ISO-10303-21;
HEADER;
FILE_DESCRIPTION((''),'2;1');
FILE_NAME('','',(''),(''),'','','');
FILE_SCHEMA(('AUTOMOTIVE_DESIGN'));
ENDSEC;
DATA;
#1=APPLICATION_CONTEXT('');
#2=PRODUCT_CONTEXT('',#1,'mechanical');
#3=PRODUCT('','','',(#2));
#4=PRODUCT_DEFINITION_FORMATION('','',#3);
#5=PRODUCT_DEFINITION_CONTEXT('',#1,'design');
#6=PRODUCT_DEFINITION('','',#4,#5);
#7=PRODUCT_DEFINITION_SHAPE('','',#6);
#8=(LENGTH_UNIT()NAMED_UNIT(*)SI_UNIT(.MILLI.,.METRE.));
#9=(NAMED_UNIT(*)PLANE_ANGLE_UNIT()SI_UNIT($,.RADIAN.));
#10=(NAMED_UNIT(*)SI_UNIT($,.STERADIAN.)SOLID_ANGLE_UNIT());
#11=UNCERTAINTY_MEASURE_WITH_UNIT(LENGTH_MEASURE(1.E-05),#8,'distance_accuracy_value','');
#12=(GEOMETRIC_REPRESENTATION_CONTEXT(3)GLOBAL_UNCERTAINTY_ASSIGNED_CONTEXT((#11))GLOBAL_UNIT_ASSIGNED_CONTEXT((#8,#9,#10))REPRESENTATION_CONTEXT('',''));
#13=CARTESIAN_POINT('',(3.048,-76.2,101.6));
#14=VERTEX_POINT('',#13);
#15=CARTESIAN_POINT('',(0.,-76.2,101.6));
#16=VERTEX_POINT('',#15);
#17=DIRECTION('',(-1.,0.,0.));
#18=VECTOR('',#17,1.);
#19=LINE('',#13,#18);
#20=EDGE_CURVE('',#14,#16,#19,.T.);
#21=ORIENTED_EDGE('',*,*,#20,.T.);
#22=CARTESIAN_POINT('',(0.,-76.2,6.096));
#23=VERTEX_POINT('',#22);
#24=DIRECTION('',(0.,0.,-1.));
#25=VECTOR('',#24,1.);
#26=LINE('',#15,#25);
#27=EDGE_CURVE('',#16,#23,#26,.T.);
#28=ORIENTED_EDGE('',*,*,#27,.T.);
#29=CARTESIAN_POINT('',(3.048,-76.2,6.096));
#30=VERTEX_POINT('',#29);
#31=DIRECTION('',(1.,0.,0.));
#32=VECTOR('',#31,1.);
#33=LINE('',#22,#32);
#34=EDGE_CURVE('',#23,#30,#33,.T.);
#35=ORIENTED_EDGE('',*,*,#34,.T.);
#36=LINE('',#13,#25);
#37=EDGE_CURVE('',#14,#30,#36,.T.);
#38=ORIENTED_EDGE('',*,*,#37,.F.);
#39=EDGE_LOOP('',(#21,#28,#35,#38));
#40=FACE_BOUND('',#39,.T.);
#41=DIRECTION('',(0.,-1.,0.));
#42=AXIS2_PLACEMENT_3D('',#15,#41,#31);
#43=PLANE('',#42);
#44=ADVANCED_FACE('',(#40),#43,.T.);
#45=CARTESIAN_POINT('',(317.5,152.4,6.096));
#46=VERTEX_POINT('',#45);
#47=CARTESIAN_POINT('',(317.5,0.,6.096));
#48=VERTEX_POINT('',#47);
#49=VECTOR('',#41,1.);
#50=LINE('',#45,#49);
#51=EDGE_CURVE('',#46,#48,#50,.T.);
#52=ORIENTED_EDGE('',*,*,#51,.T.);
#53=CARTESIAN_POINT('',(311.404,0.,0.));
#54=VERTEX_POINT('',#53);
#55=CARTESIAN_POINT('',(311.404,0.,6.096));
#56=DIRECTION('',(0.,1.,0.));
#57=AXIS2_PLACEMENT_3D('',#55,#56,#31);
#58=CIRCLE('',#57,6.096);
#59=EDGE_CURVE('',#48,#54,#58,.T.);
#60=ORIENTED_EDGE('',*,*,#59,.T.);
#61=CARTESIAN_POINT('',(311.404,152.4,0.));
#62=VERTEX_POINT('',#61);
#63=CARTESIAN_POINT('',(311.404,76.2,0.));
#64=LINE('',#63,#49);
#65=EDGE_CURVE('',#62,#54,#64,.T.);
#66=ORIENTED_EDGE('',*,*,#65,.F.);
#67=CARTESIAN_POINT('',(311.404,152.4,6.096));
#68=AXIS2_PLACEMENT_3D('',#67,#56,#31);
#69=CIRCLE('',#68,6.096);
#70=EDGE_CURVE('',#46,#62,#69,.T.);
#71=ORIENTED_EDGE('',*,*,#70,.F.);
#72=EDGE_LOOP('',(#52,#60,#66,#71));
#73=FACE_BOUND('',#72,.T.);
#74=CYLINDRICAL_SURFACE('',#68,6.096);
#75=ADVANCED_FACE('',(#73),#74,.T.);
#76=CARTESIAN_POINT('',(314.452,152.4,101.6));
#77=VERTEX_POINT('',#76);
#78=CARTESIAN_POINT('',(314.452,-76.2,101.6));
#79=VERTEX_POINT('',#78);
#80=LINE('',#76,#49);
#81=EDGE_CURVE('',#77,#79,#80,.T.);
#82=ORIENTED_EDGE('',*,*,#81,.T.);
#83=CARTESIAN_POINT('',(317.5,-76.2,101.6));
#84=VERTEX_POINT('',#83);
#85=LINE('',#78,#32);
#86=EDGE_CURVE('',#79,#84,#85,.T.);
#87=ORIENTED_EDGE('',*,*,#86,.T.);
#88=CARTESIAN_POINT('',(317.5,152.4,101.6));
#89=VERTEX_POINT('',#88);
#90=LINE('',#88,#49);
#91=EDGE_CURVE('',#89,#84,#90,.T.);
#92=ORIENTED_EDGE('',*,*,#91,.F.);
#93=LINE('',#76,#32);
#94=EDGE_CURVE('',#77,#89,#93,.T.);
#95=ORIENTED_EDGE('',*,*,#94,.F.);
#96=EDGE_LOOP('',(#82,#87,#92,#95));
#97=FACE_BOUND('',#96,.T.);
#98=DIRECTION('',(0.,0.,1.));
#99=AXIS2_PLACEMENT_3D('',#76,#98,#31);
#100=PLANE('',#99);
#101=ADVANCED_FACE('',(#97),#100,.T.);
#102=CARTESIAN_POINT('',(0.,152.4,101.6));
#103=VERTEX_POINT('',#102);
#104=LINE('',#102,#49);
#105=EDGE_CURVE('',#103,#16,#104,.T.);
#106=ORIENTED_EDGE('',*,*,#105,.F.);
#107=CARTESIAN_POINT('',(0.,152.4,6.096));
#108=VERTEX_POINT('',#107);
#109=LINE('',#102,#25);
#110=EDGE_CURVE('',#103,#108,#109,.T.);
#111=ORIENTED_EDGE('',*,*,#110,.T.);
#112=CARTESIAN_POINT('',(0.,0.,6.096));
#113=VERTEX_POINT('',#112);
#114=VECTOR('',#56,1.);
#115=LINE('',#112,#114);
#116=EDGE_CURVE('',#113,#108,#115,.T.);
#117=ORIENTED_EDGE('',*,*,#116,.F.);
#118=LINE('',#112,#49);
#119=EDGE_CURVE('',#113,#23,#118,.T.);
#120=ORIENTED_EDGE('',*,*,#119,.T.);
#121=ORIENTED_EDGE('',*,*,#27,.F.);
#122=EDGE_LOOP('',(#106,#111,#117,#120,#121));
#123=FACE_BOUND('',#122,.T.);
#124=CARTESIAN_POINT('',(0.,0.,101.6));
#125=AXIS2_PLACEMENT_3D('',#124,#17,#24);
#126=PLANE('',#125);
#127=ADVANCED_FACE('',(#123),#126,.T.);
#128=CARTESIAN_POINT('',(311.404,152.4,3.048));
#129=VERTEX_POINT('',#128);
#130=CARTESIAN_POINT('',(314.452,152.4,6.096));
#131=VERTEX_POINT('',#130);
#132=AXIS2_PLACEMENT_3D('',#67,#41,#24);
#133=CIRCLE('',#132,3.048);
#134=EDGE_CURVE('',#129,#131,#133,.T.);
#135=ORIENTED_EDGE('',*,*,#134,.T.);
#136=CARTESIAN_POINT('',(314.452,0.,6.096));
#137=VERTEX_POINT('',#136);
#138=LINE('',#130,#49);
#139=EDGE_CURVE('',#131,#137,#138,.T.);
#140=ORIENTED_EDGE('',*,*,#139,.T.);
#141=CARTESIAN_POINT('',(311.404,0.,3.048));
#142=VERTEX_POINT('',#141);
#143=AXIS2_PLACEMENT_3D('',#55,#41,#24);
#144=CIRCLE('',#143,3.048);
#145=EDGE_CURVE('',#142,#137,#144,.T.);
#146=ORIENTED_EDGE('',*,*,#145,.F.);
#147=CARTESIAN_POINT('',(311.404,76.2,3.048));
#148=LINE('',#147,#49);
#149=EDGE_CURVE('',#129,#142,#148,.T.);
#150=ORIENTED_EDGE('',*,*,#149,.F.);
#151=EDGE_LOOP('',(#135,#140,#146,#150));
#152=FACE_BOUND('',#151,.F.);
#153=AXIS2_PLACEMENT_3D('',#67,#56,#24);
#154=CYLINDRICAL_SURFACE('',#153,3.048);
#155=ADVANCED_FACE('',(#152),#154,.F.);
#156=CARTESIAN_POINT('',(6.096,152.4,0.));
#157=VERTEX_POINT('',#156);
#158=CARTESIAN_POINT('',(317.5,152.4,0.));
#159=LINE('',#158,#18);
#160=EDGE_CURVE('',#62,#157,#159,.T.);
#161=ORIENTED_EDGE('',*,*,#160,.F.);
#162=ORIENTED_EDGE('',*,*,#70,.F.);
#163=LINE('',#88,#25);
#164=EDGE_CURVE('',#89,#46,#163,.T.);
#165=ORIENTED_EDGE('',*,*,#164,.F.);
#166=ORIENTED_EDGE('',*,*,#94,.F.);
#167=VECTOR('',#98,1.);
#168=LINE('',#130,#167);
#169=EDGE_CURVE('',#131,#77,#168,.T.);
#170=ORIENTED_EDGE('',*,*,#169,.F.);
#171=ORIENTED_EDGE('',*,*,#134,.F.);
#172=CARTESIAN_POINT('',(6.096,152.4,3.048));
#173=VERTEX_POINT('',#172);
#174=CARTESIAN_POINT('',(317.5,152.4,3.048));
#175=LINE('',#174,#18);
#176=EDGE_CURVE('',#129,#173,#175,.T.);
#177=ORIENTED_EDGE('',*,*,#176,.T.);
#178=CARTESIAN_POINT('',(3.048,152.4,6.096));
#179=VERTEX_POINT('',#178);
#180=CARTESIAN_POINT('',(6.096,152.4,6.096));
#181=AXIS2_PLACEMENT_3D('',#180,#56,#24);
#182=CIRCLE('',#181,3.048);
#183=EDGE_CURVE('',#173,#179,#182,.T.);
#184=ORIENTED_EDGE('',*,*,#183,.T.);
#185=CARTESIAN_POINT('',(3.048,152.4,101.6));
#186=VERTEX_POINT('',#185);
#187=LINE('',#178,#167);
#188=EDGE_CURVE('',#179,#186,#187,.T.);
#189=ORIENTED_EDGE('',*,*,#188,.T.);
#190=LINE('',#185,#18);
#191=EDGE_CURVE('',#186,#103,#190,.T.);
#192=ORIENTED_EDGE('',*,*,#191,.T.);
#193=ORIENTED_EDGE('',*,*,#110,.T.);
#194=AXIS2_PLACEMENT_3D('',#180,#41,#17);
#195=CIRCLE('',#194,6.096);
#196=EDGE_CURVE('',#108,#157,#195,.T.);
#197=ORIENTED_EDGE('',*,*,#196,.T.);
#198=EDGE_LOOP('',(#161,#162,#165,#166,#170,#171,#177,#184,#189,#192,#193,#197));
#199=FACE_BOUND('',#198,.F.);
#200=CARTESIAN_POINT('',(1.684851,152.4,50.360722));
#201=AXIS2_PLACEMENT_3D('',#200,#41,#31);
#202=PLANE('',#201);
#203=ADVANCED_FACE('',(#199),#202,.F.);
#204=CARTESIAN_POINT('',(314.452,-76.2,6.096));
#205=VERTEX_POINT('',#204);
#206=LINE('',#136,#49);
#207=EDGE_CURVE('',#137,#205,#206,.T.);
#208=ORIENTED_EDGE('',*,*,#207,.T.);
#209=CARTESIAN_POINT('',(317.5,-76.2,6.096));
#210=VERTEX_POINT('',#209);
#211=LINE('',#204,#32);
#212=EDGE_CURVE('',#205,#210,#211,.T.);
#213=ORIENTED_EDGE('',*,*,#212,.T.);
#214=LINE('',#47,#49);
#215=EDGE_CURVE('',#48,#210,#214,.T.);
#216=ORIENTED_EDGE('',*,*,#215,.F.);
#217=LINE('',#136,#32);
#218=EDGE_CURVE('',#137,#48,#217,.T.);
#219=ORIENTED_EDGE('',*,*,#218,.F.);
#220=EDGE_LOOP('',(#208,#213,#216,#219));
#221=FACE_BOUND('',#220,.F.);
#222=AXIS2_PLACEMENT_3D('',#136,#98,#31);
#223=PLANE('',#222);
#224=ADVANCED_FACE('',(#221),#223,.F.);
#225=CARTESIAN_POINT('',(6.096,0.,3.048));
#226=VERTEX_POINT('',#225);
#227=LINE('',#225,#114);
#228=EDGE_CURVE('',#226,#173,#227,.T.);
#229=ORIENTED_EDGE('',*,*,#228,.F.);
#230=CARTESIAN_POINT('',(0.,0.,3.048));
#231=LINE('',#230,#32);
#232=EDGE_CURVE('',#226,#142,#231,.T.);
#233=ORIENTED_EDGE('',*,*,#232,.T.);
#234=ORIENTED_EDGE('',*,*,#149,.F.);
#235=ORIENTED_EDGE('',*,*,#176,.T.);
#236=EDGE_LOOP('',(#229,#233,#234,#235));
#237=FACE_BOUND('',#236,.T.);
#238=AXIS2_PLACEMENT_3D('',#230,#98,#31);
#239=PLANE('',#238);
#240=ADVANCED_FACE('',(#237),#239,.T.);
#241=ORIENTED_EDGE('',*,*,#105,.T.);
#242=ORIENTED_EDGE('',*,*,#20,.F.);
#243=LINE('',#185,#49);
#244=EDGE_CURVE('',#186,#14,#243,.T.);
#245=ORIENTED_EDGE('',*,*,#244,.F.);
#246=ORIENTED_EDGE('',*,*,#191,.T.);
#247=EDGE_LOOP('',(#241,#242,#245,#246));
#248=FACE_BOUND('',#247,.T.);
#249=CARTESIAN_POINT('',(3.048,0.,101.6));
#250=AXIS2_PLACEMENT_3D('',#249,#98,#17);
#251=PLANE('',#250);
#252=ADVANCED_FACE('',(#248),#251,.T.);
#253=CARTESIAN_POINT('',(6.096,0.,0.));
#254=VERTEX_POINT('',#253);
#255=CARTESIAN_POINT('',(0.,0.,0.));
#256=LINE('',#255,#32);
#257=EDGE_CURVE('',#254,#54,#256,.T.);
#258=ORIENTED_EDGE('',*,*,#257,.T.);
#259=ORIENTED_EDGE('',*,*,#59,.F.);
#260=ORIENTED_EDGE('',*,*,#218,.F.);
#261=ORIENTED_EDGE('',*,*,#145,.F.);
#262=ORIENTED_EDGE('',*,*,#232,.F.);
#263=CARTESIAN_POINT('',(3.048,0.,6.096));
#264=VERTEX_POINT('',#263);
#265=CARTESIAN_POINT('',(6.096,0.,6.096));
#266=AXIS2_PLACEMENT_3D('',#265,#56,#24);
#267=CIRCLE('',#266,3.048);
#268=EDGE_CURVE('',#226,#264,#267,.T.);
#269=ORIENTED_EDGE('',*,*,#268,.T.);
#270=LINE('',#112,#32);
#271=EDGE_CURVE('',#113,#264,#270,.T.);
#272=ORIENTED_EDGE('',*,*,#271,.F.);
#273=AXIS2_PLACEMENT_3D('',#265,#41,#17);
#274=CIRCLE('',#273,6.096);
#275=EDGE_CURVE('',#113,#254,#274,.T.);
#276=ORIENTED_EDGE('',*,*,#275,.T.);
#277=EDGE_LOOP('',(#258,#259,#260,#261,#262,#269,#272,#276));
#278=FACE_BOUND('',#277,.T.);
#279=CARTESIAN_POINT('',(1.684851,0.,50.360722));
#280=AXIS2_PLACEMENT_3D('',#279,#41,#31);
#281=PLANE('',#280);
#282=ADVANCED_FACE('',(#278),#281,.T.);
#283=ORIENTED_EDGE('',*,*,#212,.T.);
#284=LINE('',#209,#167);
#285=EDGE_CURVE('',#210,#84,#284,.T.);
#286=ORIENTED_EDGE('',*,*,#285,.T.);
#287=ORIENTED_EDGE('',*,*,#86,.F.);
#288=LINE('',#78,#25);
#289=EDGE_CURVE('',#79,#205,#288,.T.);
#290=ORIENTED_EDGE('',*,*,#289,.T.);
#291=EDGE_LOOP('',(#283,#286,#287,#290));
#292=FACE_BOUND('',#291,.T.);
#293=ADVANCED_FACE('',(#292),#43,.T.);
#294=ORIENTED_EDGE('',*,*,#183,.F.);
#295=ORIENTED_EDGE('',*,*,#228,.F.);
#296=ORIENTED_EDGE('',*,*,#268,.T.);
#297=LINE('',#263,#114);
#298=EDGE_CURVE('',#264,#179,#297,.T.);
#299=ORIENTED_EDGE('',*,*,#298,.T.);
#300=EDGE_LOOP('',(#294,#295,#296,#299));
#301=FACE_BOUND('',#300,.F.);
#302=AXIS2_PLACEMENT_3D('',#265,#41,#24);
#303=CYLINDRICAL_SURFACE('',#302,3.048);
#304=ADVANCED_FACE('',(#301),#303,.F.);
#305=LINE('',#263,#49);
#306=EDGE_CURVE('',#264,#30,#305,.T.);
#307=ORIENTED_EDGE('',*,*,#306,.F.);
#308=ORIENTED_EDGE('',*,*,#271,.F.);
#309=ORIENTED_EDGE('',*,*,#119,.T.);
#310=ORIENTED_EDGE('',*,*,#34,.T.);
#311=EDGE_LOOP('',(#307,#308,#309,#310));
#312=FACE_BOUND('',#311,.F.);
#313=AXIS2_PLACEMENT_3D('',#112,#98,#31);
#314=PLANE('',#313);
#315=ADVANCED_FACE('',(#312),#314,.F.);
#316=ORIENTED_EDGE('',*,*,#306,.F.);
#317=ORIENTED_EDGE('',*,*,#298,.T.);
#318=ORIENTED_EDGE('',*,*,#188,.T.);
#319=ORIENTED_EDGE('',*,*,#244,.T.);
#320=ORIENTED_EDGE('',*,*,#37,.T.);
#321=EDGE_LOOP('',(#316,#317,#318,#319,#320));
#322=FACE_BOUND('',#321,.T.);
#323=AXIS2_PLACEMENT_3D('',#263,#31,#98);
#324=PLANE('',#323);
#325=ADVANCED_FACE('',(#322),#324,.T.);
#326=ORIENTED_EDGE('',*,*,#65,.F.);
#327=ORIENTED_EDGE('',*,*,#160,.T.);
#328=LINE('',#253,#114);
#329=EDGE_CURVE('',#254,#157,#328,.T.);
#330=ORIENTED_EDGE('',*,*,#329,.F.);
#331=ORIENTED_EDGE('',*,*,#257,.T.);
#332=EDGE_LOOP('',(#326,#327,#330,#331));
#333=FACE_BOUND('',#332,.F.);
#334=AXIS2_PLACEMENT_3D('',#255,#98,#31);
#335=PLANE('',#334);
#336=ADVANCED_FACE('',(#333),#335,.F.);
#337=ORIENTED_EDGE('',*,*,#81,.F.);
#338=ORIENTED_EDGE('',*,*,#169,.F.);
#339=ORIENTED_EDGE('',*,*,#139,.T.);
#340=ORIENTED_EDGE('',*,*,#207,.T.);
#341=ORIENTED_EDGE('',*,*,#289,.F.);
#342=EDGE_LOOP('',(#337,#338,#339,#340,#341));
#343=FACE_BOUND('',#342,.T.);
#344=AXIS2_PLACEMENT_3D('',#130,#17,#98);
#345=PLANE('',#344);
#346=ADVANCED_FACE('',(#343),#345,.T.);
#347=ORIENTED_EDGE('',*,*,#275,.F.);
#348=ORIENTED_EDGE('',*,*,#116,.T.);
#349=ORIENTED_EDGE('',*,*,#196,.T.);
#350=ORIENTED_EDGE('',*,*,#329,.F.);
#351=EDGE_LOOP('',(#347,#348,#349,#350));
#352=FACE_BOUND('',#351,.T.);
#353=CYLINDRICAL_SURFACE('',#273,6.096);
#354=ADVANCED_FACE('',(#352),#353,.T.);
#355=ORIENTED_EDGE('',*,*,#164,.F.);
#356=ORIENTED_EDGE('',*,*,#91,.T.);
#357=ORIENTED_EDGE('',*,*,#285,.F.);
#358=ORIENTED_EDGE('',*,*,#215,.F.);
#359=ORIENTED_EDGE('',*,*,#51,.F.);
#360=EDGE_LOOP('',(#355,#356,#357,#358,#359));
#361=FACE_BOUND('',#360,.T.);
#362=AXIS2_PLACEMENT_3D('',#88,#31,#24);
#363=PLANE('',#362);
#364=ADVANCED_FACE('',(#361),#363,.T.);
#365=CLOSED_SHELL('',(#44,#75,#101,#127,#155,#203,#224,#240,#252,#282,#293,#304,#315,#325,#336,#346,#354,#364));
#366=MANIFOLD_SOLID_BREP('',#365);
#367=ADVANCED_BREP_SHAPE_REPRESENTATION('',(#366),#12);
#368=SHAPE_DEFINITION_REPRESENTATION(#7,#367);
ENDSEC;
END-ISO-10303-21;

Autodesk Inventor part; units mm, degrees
ref_plane "YZ Plane" through (0, 0, 0) normal (1, 0, 0) x (0, 1, 0)
ref_plane "XZ Plane" through (0, 0, 0) normal (0, 1, 0) x (-1, 0, 0)
ref_plane "XY Plane" through (0, 0, 0) normal (0, 0, 1) x (1, 0, 0)
sketch "Sketch1" plane through (0, 0, 0) normal (0, 0, 1) x (1, 0, 0)
  line L0 (0, 0) -> (317.5, 0)
  line L1 (317.5, 0) -> (317.5, 152.4)
  line L2 (317.5, 152.4) -> (0, 152.4)
  line L3 (0, 152.4) -> (0, 0)
  dimension "d0" = 317.5
  dimension "d1" = 152.4
extrude "Plate1" add sketch "Sketch1" along normal blind 3.048
sketch "Sketch2" plane through (3.048, 0, 0) normal (-1, 0, 0) x (0, -1, 0)
  line L0 (-152.4, 0) -> (0, 0)
  line L1 (0, 0) -> (0, 101.6)
  line L2 (0, 101.6) -> (-152.4, 101.6)
  line L3 (-152.4, 101.6) -> (-152.4, 0)
edge flange "Flange1" height 101.6 angle 90 thickness 3.048 bend radius 3.048 thickness toward (-1, 0, 0) relief tear relief width 3.048 relief depth 1.524 corner gap 3.048 corner form 0 edges at (0, 76.2, 3.048) (317.5, 76.2, 3.048) wall of the first edge with corners at (3.048, 152.4, 0) (3.048, 0, 0) (3.048, 0, 101.6) (3.048, 152.4, 101.6)
bend "Bend1"
corner "Corner1"
sketch "Sketch3" plane through (0, 0, 101.6) normal (0, -1, 0) x (1, 0, 0)
  line L0 (0, -95.504) -> (3.048, -95.504) projected
  line L1 (3.048, 0) -> (3.048, -95.504) projected
  line L2 (3.048, 0) -> (0, 0) projected
  line L3 (0, 0) -> (0, -95.504) projected
  line L4 (314.452, -95.504) -> (317.5, -95.504) projected
  line L5 (317.5, -95.504) -> (317.5, 0) projected
  line L6 (314.452, 0) -> (317.5, 0) projected
  line L7 (314.452, 0) -> (314.452, -95.504) projected
  point P0 (0, -101.6)
extrude "Extrusion1" add sketch "Sketch3" along normal blind 76.2
equation "\"d3\" = BendReliefWidth"
equation "\"d4\" = BendReliefDepth"
equation "\"d5\" = MinimumRemnant"
equation "\"d6\" = BendRadius"
equation "\"d9\" = BendRadius"
equation "\"d10\" = CornerReliefSize"
equation "\"d11\" = GapSize"
equation "\"d12\" = JacobiRadiusSize"
equation "\"BendRadius\" = Thickness"
equation "\"BendReliefWidth\" = Thickness"
equation "\"BendReliefDepth\" = 0.5 * Thickness"
equation "\"CornerReliefSize\" = 4 * Thickness"
equation "\"MinimumRemnant\" = 2 * Thickness"
equation "\"TransitionRadius\" = BendRadius"
equation "\"JacobiRadiusSize\" = BendRadius"
equation "\"GapSize\" = Thickness"
equation "\"d2\" = BendRadius"
equation "\"Thickness\" = 3.048"
properties part number "Chute(2)"
